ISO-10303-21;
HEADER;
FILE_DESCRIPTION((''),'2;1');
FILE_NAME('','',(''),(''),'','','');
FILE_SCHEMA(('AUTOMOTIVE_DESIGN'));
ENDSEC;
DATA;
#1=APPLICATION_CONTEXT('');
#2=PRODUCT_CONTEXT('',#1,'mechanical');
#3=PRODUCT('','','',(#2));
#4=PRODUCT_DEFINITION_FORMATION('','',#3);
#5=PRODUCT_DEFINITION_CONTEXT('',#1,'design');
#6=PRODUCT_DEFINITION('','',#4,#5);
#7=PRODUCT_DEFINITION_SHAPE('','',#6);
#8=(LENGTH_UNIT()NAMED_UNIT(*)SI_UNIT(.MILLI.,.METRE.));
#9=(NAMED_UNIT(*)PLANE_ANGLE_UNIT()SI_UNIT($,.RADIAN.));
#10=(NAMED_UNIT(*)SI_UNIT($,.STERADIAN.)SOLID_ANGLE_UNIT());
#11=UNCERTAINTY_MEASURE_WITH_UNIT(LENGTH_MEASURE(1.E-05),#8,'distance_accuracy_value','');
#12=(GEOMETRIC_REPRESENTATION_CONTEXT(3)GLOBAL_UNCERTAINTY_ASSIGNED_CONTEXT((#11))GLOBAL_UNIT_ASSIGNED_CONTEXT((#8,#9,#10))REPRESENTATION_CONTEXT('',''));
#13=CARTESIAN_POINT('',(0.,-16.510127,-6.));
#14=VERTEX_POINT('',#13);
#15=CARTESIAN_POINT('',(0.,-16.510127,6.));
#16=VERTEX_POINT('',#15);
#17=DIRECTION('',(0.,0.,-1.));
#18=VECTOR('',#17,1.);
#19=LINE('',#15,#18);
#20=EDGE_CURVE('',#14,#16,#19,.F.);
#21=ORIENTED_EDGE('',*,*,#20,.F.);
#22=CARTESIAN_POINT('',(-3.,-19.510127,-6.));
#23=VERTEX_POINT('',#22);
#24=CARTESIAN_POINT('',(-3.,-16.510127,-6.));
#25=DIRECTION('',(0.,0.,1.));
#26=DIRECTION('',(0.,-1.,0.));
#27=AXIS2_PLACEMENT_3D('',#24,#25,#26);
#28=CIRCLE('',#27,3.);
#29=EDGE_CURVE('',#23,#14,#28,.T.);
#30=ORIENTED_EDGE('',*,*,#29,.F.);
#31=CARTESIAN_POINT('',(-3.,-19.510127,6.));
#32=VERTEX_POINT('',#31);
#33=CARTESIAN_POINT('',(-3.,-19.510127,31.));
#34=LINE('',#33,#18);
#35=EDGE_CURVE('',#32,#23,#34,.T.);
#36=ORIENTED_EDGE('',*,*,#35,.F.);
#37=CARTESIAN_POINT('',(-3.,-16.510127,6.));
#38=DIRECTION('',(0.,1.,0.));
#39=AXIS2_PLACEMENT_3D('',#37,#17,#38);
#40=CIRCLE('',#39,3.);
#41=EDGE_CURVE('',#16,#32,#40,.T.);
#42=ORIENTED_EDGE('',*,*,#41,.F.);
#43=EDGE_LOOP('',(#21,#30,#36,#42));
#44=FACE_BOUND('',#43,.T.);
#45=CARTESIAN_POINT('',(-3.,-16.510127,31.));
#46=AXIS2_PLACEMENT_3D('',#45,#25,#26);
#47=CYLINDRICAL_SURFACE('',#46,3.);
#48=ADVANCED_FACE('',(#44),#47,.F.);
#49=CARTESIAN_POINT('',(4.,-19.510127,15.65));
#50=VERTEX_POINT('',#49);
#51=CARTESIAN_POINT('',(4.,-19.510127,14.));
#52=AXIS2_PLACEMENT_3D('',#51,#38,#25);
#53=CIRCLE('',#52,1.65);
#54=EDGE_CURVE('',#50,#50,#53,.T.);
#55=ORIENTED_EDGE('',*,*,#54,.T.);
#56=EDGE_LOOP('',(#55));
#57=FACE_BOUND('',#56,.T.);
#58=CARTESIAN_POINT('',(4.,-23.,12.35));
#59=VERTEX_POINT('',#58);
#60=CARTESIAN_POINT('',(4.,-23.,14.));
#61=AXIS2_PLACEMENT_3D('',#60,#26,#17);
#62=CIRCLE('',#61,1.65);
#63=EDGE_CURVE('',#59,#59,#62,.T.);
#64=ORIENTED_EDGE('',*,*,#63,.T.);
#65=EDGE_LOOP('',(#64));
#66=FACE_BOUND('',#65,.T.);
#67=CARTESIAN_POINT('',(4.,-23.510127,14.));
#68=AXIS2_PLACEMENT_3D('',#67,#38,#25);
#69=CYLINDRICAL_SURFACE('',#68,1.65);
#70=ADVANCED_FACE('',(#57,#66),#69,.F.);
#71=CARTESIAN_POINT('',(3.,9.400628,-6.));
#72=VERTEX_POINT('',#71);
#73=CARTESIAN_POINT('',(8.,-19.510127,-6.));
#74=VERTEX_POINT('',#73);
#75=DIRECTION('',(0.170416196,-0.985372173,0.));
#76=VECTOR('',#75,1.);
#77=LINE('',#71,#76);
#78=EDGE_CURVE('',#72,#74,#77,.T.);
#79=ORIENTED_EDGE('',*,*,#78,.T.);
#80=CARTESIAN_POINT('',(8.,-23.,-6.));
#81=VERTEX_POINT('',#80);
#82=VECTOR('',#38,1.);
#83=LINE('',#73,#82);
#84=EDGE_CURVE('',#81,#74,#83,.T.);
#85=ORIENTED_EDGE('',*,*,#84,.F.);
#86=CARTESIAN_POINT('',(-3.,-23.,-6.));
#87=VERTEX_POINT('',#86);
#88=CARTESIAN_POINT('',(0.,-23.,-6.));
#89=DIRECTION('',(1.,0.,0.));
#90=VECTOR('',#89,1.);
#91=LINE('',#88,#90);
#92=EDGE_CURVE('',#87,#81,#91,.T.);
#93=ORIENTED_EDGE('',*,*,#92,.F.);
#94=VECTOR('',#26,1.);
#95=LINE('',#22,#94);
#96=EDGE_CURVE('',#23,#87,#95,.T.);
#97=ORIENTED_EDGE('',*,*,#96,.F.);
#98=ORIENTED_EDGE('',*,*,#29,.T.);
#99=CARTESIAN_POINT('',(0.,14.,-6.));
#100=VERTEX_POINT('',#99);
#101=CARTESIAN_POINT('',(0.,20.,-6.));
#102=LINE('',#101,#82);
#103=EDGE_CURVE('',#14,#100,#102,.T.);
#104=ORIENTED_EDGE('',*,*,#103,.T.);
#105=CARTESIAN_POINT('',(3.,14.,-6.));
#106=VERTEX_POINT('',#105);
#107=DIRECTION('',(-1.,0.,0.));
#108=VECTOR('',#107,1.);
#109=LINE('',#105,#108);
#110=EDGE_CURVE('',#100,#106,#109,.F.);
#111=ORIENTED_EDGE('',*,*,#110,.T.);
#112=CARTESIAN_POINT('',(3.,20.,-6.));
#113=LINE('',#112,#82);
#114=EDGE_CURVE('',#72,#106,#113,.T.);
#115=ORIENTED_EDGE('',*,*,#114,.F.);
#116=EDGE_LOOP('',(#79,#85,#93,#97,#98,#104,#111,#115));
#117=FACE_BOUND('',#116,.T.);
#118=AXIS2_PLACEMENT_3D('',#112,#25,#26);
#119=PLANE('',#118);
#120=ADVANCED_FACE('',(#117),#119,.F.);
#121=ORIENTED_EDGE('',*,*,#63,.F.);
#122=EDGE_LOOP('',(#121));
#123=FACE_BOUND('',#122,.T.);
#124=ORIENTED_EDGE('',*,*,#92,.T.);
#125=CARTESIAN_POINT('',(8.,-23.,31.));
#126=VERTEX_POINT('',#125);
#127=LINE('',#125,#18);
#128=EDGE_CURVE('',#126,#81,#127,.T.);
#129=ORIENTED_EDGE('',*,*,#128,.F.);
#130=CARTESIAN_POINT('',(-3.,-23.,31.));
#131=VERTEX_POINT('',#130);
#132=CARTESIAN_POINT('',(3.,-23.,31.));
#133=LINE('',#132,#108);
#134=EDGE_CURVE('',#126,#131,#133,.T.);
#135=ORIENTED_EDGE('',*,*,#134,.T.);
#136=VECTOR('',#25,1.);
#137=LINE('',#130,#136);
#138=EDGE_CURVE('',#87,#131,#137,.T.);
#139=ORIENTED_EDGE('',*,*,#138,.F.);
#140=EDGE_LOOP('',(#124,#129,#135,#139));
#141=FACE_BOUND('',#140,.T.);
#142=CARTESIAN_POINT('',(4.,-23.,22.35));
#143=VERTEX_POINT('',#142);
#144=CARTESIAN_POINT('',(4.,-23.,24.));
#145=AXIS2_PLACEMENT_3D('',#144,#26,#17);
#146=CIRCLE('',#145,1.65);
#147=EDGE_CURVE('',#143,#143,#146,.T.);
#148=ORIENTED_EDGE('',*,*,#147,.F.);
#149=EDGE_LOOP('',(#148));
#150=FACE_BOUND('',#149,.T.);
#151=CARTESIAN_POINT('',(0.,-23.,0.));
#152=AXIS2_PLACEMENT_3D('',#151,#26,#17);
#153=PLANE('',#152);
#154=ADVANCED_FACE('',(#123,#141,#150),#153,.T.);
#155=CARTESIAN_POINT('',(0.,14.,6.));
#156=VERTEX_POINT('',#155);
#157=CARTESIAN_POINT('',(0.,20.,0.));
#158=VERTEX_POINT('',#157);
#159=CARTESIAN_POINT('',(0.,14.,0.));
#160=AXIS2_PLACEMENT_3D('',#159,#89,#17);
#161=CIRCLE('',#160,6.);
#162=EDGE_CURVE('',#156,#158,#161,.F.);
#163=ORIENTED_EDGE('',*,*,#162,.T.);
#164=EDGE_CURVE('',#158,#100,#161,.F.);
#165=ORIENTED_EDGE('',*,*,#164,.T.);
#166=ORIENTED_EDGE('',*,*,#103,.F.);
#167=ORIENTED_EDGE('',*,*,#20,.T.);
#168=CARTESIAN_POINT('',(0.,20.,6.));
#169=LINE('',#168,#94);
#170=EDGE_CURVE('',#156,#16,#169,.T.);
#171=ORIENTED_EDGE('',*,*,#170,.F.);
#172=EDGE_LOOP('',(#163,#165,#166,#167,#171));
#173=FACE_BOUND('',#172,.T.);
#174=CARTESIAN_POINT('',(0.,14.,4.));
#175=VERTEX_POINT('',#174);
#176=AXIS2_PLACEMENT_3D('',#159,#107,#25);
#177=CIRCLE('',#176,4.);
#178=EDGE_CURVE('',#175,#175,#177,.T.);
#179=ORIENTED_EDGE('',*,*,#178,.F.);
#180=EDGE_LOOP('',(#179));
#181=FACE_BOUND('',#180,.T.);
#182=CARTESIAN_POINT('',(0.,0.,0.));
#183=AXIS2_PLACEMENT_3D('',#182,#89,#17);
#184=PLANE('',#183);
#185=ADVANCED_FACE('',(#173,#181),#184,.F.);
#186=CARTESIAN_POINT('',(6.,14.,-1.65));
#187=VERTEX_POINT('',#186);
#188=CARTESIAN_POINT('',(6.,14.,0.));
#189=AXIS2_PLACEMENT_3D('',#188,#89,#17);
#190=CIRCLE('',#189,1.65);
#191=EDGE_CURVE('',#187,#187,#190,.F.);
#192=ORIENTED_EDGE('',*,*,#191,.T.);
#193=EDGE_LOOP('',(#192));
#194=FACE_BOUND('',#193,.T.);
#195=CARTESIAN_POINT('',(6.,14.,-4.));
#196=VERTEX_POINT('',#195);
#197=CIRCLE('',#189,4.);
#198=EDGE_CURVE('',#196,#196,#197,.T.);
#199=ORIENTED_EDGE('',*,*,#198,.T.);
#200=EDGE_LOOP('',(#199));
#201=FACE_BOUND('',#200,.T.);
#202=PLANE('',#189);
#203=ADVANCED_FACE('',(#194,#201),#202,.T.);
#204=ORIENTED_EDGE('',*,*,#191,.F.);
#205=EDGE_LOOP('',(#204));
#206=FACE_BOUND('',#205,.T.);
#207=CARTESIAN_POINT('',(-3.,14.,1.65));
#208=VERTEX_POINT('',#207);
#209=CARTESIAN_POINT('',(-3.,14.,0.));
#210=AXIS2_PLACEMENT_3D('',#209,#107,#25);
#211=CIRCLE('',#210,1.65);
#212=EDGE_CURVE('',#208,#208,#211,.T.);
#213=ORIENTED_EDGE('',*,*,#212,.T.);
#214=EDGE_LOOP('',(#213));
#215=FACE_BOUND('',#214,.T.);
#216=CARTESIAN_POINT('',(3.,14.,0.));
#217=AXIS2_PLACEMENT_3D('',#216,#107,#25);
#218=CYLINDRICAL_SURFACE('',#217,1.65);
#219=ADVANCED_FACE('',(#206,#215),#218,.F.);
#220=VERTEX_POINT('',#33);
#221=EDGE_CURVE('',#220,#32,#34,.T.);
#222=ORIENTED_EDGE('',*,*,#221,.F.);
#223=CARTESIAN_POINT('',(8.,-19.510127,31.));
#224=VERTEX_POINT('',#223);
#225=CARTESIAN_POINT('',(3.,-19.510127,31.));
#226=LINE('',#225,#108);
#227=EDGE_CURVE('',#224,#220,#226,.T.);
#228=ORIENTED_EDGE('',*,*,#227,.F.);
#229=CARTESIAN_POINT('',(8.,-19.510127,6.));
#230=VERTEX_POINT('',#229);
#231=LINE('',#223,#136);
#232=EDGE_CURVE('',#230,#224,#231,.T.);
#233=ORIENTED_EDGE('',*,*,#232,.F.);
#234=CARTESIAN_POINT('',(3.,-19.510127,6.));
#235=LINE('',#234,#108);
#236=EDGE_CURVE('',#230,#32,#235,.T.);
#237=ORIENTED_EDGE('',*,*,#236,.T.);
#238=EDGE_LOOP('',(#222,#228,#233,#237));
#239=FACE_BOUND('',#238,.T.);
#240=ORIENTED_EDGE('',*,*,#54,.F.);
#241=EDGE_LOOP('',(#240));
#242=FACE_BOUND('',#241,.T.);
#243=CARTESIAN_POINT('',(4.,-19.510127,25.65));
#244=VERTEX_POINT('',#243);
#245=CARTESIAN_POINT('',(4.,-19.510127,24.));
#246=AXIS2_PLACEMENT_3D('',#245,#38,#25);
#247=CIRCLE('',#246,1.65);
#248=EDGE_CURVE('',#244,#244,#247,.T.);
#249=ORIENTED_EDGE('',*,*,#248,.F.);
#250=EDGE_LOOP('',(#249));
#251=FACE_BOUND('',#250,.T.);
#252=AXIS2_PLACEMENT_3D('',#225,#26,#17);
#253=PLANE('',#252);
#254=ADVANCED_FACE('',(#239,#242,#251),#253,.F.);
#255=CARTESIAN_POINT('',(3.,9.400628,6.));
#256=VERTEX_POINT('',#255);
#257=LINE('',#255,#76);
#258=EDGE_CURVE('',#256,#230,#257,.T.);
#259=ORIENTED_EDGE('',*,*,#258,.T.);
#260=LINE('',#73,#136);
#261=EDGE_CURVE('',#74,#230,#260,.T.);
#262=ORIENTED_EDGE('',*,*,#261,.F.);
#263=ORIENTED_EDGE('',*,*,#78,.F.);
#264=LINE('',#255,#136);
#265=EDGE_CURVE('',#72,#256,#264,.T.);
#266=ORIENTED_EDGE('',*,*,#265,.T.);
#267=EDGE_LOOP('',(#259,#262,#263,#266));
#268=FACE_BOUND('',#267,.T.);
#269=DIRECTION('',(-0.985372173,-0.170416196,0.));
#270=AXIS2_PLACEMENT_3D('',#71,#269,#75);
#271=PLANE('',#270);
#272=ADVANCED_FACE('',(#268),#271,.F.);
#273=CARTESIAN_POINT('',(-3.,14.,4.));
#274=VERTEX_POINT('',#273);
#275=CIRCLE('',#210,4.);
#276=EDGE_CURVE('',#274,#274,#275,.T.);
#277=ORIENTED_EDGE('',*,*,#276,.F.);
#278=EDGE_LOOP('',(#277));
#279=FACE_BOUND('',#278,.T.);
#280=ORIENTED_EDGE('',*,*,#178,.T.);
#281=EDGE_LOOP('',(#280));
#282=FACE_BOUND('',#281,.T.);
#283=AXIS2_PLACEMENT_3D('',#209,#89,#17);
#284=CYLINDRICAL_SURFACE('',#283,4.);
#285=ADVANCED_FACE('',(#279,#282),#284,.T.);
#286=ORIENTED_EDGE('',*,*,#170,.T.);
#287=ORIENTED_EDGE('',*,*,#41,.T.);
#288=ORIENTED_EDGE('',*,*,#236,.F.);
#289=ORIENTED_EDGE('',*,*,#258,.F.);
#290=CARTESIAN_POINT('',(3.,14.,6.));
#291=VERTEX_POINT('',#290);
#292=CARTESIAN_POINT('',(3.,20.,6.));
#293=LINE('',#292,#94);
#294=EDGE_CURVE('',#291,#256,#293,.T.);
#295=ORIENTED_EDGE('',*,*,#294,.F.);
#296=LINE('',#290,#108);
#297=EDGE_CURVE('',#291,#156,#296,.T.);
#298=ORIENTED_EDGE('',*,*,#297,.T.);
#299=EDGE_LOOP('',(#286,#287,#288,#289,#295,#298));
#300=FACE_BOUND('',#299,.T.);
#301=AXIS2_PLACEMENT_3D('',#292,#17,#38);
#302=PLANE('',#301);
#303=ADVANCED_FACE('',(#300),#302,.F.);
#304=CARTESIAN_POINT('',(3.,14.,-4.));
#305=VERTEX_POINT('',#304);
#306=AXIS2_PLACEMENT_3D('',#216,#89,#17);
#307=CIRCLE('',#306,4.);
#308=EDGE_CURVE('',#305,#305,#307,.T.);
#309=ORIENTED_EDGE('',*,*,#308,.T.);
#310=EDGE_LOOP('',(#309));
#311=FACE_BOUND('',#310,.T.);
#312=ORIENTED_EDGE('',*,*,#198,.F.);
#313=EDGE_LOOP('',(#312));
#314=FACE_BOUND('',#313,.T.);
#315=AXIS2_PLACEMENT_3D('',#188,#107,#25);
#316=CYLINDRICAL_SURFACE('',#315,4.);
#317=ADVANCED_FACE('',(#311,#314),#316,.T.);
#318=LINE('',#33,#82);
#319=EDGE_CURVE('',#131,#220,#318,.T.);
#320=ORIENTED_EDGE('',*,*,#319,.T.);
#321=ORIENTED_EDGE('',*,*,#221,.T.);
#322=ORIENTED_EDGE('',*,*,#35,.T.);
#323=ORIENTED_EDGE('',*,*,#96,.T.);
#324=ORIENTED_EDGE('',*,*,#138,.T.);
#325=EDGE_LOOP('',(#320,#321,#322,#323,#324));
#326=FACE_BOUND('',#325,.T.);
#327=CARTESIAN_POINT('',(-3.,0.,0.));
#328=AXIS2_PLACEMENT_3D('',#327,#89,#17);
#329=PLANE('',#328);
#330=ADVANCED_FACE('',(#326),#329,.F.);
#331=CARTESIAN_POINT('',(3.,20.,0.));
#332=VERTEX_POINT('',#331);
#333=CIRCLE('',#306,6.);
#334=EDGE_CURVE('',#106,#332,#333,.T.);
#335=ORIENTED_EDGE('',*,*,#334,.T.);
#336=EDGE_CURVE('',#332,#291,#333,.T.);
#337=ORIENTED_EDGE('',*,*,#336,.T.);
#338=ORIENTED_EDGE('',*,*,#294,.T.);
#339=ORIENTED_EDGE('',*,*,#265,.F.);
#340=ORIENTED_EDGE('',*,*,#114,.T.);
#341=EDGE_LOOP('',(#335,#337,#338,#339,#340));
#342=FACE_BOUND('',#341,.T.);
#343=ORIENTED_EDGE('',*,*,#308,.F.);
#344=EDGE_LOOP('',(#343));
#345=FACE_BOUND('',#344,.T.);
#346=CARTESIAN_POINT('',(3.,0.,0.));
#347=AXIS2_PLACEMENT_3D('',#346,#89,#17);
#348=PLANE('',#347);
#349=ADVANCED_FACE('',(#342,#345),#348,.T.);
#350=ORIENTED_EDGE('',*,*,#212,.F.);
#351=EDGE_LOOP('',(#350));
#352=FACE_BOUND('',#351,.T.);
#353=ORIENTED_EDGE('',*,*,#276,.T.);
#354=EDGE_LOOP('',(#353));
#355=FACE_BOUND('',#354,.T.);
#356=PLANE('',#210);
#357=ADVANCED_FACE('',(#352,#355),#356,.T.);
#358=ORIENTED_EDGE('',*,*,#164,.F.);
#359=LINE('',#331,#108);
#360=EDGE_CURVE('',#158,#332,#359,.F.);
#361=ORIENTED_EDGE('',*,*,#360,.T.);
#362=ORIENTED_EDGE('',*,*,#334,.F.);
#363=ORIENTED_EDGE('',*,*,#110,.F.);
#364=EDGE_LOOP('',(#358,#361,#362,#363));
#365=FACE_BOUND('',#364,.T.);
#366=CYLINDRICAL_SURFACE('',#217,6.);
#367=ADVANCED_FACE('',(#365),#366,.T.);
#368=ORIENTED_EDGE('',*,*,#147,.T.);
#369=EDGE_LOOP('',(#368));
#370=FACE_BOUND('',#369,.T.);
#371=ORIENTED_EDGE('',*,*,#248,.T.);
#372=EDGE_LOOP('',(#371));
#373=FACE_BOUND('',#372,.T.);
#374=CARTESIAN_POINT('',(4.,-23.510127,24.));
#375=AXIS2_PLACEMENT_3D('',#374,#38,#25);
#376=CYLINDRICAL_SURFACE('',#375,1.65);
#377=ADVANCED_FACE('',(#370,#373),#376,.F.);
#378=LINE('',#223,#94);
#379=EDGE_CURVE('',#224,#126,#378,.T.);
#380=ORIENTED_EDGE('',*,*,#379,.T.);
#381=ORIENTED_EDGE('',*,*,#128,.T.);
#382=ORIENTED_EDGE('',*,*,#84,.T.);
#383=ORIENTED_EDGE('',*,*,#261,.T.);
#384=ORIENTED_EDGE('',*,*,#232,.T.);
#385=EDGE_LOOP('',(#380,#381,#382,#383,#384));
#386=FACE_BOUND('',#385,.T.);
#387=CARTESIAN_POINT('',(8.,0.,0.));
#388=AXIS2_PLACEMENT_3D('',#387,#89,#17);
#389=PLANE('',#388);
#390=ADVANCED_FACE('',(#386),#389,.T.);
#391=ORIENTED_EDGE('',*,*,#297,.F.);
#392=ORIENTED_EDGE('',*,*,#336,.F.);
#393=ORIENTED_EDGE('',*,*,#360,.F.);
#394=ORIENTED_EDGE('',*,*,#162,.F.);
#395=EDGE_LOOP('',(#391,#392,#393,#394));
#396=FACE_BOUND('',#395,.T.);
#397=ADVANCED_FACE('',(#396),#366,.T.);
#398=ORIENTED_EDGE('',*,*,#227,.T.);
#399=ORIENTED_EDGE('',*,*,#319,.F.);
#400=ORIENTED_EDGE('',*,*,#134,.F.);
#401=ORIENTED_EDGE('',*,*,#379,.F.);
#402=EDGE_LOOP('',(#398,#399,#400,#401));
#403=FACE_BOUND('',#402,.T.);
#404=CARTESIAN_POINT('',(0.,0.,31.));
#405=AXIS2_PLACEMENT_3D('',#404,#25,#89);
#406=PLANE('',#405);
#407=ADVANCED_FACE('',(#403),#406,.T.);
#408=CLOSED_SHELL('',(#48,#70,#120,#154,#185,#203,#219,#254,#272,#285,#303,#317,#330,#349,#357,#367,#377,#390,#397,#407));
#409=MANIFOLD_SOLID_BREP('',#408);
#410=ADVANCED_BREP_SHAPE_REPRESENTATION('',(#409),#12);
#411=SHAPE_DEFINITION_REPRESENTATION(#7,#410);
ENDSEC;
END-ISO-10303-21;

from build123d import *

# Parameters (mm, degrees)
SKETCH_1_W          = 12
SKETCH_1_H          = 40
SKETCH_1_R          = 1.65
EXTRUDE_1_DEPTH     = 3
FILLET_1_R          = 6
SKETCH_2_R          = 4
SKETCH_2_R_2        = 1.65
EXTRUDE_2_DEPTH     = 3
EXTRUDE_START       = 3
SKETCH_3_R          = 4
SKETCH_3_R_2        = 1.65
EXTRUDE_3_DEPTH     = 3
SKETCH_4_W          = 3
SKETCH_4_H          = 12
EXTRUDE_4_DEPTH     = 3
SKETCH_5_W          = 3
SKETCH_5_H          = 3.489872662
EXTRUDE_5_DEPTH     = 37
SKETCH_8_W          = 37
SKETCH_8_H          = 3.489872662
EXTRUDE_8_DEPTH     = 5
SKETCH_9_W          = 37
SKETCH_9_H          = 3.489872662
EXTRUDE_9_DEPTH     = 3
SKETCH_10_W         = 12
SKETCH_10_H         = 28.910754844
EXTRUDE_10_DEPTH    = 5
FILLET_2_R          = 3
SKETCH_13_R         = 1.65
CUT_EXTRUDE_2_DEPTH = 4
CUT_EXTRUDE_3_DEPTH = 12


with BuildPart() as part:
    # 草图1 → 凸台-拉伸1 (new body)
    with BuildSketch(Plane(origin=(0, 0, 0), x_dir=(0, 0, -1), z_dir=(1, 0, 0))):
        Rectangle(SKETCH_1_W, SKETCH_1_H)
        with Locations((0, 14)):
            Circle(SKETCH_1_R, mode=Mode.SUBTRACT)
    extrude(amount=EXTRUDE_1_DEPTH)

    # 圆角1
    fillet_1_edges = [part.edges().sort_by_distance(p)[0] for p in [
        (1.5, 20, -6),
        (1.5, 20, 6),
    ]]
    fillet(fillet_1_edges, radius=FILLET_1_R - 0.0001)  # a hair under: the kernel refuses the full size

    # 草图2 → 凸台-拉伸2 (add)
    with BuildSketch(Plane(origin=(3, 0, 0), x_dir=(0, 0, -1), z_dir=(1, 0, 0))):
        with Locations((0, 14)):
            Circle(SKETCH_2_R)
        with Locations((0, 14)):
            Circle(SKETCH_2_R_2, mode=Mode.SUBTRACT)
    extrude(amount=EXTRUDE_2_DEPTH)

    # 草图3 → 凸台-拉伸3 (add)
    with BuildSketch(Plane.ZY.offset(EXTRUDE_START)):
        with Locations(Location((0, 14, 0), (0, 0, 180))):
            Circle(SKETCH_3_R)
        with Locations((0, 14)):
            Circle(SKETCH_3_R_2, mode=Mode.SUBTRACT)
    extrude(amount=-EXTRUDE_3_DEPTH)

    # 草图4 → 凸台-拉伸4 (add)
    with BuildSketch(Plane.XZ.offset(20)):
        with Locations((1.5, 0)):
            Rectangle(SKETCH_4_W, SKETCH_4_H)
    extrude(amount=EXTRUDE_4_DEPTH)

    # 草图5 → 凸台-拉伸5 (add)
    with BuildSketch(Plane(origin=(0, 0, -6), x_dir=(-1, 0, 0), z_dir=(0, 0, -1))):
        with Locations((-1.5, -21.255063669)):
            Rectangle(SKETCH_5_W, SKETCH_5_H)
    extrude(amount=-EXTRUDE_5_DEPTH)

    # 草图8 → 凸台-拉伸8 (add)
    with BuildSketch(Plane(origin=(3, 0, 0), x_dir=(0, 0, -1), z_dir=(1, 0, 0))):
        with Locations((-12.5, -21.255063669)):
            Rectangle(SKETCH_8_W, SKETCH_8_H)
    extrude(amount=EXTRUDE_8_DEPTH)

    # 草图9 → 凸台-拉伸9 (add)
    with BuildSketch(Plane.ZY):
        with Locations((12.5, -21.255063669)):
            Rectangle(SKETCH_9_W, SKETCH_9_H)
    extrude(amount=EXTRUDE_9_DEPTH)

    # 草图10 → 凸台-拉伸10 (add)
    with BuildSketch(Plane(origin=(3, 0, 0), x_dir=(0, 0, -1), z_dir=(1, 0, 0))):
        with Locations((0, -5.054749916)):
            Rectangle(SKETCH_10_W, SKETCH_10_H)
    extrude(amount=EXTRUDE_10_DEPTH)

    # 圆角2
    fillet_2_edges = [part.edges().sort_by_distance(p)[0] for p in [
        (0, -19.510127338, 0),
    ]]
    fillet(fillet_2_edges, radius=FILLET_2_R - 0.0001)  # a hair under: the kernel refuses the full size

    # 草图13 → 切除-拉伸2 (cut)
    with BuildSketch(Plane(origin=(0, -19.510127338, 0), x_dir=(1, 0, 0), z_dir=(0, 1, 0))):
        with Locations(Location((4, -14, 0), (0, 0, 270))):
            Circle(SKETCH_13_R)
        with Locations(Location((4, -24, 0), (0, 0, 270))):
            Circle(SKETCH_13_R)
    extrude(amount=-CUT_EXTRUDE_2_DEPTH, mode=Mode.SUBTRACT)

    # 草图15 → 切除-拉伸3 (cut)
    with BuildSketch(Plane.XY.offset(6)):
        Polygon((3, 9.400627506), (8, -19.510127338), (8, 9.400627506), align=None)
    extrude(amount=-CUT_EXTRUDE_3_DEPTH, mode=Mode.SUBTRACT)


solid = part.part
